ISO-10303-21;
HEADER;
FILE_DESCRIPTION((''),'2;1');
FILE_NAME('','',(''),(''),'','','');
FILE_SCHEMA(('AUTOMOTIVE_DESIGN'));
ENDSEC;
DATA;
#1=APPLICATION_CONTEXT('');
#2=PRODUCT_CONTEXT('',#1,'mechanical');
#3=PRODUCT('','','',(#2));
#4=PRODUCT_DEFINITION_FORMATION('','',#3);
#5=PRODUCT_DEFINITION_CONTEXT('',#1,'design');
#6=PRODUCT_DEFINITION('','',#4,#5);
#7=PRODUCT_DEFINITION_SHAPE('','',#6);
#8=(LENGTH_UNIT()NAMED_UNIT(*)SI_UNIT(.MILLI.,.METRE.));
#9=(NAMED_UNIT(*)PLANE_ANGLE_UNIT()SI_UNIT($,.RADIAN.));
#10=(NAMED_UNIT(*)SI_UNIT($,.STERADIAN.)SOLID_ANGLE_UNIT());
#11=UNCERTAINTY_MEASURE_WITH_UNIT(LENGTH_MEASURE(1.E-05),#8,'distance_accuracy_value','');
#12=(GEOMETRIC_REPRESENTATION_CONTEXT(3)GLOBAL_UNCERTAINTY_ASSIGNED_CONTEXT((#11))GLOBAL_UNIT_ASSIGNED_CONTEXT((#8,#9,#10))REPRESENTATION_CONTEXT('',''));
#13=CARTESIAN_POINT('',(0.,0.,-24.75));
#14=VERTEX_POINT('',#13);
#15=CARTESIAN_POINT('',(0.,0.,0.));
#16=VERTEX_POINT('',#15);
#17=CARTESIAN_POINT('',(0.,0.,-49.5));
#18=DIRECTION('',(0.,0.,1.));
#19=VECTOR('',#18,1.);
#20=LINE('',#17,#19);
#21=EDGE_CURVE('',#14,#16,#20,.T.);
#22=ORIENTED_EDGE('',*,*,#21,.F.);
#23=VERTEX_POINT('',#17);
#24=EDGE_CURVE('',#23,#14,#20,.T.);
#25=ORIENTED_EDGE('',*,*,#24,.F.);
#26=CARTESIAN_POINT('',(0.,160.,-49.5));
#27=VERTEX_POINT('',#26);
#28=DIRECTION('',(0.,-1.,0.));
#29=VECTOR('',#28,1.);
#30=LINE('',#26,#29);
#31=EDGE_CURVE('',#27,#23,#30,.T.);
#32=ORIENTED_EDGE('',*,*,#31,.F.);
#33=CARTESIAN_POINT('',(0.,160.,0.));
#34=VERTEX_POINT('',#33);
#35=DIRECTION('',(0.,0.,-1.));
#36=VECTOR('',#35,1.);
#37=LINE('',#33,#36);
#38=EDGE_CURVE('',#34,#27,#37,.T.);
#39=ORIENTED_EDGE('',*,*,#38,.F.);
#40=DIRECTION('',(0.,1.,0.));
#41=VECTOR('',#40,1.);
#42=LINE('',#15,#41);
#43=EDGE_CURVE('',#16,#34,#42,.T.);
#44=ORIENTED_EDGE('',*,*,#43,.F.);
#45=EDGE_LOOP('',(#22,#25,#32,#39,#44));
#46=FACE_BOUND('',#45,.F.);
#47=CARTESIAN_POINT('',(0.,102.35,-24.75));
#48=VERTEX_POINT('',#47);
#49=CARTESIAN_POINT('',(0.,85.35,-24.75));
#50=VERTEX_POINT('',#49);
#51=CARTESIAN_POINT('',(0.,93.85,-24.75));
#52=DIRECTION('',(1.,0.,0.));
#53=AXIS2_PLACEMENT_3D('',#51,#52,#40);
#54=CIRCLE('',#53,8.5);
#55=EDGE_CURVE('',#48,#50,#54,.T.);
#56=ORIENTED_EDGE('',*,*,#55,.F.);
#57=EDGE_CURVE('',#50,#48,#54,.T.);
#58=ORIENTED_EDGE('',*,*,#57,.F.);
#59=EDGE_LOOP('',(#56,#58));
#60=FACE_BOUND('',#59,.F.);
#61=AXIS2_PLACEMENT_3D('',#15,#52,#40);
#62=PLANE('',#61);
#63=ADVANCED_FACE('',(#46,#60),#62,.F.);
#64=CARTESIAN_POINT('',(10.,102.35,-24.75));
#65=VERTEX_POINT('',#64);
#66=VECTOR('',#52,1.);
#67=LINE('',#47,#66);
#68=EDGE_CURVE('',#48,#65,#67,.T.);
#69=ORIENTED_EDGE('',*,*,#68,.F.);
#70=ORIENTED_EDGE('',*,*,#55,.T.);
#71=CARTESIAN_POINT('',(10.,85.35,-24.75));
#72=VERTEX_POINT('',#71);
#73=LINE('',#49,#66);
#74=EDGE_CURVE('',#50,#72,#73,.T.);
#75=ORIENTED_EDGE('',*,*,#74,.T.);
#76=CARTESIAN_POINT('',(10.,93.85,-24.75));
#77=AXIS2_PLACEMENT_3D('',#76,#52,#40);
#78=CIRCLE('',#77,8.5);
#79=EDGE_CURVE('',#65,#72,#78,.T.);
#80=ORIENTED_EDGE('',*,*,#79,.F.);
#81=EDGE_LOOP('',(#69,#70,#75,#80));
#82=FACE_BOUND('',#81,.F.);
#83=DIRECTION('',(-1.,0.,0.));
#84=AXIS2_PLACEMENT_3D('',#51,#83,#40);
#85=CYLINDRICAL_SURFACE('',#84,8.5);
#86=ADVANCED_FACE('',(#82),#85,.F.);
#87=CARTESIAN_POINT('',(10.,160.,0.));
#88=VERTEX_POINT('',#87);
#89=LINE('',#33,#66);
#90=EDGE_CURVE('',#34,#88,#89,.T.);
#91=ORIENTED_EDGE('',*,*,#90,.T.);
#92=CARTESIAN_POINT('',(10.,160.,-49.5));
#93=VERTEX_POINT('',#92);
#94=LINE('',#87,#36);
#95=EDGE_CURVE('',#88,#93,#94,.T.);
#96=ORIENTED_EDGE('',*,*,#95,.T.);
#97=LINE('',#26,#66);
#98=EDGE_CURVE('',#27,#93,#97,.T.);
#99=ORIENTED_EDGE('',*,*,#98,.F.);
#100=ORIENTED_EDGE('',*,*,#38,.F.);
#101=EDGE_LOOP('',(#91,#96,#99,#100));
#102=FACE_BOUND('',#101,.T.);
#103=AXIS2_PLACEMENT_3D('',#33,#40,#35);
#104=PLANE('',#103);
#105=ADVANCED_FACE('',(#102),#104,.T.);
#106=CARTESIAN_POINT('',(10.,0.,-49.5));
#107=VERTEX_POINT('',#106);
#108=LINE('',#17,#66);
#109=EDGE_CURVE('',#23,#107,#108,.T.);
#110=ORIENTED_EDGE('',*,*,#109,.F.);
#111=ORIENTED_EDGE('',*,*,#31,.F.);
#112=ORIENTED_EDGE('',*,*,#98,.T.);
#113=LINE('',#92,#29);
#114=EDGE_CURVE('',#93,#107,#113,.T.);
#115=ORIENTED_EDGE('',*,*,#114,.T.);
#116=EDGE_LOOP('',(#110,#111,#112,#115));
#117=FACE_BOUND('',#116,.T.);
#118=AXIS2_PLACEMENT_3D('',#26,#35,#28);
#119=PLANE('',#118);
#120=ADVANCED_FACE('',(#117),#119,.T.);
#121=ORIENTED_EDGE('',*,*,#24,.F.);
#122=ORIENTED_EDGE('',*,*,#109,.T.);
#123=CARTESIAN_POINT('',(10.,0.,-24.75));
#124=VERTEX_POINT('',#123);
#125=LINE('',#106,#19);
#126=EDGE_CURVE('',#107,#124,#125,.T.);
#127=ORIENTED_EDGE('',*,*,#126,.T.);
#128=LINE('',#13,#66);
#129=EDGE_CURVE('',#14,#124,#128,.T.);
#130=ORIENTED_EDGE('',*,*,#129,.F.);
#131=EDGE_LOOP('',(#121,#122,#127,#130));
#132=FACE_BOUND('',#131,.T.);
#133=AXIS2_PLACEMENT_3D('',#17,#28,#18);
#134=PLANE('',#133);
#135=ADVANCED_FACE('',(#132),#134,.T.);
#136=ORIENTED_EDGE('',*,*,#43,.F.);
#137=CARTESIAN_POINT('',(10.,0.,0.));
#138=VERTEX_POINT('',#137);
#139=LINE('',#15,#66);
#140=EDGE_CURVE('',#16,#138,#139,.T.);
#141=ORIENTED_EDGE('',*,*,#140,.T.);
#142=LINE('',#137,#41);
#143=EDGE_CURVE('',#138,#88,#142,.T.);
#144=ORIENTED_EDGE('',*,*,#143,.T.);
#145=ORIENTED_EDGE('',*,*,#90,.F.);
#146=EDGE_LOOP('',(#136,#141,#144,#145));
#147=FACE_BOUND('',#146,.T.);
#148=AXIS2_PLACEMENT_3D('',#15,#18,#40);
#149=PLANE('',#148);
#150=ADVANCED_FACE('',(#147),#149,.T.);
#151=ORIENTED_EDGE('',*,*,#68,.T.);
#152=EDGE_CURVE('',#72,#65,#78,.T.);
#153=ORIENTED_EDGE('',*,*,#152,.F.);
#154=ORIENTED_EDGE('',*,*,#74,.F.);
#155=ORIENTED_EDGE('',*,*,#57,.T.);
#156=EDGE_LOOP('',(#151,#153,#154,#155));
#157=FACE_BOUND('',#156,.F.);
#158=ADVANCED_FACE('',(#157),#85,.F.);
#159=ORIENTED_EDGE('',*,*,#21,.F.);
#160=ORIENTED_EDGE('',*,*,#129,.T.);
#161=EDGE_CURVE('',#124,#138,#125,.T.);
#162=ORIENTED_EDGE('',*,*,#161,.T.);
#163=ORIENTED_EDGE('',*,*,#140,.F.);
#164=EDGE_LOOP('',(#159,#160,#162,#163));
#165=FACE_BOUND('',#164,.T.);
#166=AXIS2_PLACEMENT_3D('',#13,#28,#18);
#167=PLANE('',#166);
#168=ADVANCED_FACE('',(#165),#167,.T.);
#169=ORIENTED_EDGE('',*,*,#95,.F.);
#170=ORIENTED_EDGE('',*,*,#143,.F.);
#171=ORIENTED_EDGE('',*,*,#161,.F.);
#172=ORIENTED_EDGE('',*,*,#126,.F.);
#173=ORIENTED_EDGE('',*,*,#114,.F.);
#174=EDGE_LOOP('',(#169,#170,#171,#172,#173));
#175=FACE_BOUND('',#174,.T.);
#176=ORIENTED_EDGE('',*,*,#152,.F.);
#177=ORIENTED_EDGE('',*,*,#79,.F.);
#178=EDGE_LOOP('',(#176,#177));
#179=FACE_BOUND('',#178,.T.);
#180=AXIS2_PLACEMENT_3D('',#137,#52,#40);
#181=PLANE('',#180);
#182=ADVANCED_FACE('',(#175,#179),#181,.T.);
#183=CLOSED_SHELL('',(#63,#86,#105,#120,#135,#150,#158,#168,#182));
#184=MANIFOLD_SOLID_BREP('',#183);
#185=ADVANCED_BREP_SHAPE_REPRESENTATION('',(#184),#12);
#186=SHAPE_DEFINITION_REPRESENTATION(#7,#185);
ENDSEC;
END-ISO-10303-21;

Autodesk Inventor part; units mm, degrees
ref_plane "YZ Plane" through (0, 0, 0) normal (1, 0, 0) x (0, 1, 0)
ref_plane "XZ Plane" through (0, 0, 0) normal (0, 1, 0) x (-1, 0, 0)
ref_plane "XY Plane" through (0, 0, 0) normal (0, 0, 1) x (1, 0, 0)
sketch "Sketch1" plane through (0, 0, 0) normal (1, 0, 0) x (0, 1, 0)
  line L0 (0, 0) -> (160, 0)
  line L1 (160, 0) -> (160, -49.5)
  line L2 (160, -49.5) -> (0, -49.5)
  line L3 (0, -49.5) -> (0, 0)
  line L4 (0, -24.75) -> (93.85, -24.75)
  circle A0 centre (93.85, -24.75) radius 8.5
  dimension "d0" = 160
  dimension "d1" = 49.5
  dimension "d2" = 93.85
  dimension "d3" = 17
extrude "Extrusion1" add sketch "Sketch1" along normal blind 10
properties part number "tallwall3"
